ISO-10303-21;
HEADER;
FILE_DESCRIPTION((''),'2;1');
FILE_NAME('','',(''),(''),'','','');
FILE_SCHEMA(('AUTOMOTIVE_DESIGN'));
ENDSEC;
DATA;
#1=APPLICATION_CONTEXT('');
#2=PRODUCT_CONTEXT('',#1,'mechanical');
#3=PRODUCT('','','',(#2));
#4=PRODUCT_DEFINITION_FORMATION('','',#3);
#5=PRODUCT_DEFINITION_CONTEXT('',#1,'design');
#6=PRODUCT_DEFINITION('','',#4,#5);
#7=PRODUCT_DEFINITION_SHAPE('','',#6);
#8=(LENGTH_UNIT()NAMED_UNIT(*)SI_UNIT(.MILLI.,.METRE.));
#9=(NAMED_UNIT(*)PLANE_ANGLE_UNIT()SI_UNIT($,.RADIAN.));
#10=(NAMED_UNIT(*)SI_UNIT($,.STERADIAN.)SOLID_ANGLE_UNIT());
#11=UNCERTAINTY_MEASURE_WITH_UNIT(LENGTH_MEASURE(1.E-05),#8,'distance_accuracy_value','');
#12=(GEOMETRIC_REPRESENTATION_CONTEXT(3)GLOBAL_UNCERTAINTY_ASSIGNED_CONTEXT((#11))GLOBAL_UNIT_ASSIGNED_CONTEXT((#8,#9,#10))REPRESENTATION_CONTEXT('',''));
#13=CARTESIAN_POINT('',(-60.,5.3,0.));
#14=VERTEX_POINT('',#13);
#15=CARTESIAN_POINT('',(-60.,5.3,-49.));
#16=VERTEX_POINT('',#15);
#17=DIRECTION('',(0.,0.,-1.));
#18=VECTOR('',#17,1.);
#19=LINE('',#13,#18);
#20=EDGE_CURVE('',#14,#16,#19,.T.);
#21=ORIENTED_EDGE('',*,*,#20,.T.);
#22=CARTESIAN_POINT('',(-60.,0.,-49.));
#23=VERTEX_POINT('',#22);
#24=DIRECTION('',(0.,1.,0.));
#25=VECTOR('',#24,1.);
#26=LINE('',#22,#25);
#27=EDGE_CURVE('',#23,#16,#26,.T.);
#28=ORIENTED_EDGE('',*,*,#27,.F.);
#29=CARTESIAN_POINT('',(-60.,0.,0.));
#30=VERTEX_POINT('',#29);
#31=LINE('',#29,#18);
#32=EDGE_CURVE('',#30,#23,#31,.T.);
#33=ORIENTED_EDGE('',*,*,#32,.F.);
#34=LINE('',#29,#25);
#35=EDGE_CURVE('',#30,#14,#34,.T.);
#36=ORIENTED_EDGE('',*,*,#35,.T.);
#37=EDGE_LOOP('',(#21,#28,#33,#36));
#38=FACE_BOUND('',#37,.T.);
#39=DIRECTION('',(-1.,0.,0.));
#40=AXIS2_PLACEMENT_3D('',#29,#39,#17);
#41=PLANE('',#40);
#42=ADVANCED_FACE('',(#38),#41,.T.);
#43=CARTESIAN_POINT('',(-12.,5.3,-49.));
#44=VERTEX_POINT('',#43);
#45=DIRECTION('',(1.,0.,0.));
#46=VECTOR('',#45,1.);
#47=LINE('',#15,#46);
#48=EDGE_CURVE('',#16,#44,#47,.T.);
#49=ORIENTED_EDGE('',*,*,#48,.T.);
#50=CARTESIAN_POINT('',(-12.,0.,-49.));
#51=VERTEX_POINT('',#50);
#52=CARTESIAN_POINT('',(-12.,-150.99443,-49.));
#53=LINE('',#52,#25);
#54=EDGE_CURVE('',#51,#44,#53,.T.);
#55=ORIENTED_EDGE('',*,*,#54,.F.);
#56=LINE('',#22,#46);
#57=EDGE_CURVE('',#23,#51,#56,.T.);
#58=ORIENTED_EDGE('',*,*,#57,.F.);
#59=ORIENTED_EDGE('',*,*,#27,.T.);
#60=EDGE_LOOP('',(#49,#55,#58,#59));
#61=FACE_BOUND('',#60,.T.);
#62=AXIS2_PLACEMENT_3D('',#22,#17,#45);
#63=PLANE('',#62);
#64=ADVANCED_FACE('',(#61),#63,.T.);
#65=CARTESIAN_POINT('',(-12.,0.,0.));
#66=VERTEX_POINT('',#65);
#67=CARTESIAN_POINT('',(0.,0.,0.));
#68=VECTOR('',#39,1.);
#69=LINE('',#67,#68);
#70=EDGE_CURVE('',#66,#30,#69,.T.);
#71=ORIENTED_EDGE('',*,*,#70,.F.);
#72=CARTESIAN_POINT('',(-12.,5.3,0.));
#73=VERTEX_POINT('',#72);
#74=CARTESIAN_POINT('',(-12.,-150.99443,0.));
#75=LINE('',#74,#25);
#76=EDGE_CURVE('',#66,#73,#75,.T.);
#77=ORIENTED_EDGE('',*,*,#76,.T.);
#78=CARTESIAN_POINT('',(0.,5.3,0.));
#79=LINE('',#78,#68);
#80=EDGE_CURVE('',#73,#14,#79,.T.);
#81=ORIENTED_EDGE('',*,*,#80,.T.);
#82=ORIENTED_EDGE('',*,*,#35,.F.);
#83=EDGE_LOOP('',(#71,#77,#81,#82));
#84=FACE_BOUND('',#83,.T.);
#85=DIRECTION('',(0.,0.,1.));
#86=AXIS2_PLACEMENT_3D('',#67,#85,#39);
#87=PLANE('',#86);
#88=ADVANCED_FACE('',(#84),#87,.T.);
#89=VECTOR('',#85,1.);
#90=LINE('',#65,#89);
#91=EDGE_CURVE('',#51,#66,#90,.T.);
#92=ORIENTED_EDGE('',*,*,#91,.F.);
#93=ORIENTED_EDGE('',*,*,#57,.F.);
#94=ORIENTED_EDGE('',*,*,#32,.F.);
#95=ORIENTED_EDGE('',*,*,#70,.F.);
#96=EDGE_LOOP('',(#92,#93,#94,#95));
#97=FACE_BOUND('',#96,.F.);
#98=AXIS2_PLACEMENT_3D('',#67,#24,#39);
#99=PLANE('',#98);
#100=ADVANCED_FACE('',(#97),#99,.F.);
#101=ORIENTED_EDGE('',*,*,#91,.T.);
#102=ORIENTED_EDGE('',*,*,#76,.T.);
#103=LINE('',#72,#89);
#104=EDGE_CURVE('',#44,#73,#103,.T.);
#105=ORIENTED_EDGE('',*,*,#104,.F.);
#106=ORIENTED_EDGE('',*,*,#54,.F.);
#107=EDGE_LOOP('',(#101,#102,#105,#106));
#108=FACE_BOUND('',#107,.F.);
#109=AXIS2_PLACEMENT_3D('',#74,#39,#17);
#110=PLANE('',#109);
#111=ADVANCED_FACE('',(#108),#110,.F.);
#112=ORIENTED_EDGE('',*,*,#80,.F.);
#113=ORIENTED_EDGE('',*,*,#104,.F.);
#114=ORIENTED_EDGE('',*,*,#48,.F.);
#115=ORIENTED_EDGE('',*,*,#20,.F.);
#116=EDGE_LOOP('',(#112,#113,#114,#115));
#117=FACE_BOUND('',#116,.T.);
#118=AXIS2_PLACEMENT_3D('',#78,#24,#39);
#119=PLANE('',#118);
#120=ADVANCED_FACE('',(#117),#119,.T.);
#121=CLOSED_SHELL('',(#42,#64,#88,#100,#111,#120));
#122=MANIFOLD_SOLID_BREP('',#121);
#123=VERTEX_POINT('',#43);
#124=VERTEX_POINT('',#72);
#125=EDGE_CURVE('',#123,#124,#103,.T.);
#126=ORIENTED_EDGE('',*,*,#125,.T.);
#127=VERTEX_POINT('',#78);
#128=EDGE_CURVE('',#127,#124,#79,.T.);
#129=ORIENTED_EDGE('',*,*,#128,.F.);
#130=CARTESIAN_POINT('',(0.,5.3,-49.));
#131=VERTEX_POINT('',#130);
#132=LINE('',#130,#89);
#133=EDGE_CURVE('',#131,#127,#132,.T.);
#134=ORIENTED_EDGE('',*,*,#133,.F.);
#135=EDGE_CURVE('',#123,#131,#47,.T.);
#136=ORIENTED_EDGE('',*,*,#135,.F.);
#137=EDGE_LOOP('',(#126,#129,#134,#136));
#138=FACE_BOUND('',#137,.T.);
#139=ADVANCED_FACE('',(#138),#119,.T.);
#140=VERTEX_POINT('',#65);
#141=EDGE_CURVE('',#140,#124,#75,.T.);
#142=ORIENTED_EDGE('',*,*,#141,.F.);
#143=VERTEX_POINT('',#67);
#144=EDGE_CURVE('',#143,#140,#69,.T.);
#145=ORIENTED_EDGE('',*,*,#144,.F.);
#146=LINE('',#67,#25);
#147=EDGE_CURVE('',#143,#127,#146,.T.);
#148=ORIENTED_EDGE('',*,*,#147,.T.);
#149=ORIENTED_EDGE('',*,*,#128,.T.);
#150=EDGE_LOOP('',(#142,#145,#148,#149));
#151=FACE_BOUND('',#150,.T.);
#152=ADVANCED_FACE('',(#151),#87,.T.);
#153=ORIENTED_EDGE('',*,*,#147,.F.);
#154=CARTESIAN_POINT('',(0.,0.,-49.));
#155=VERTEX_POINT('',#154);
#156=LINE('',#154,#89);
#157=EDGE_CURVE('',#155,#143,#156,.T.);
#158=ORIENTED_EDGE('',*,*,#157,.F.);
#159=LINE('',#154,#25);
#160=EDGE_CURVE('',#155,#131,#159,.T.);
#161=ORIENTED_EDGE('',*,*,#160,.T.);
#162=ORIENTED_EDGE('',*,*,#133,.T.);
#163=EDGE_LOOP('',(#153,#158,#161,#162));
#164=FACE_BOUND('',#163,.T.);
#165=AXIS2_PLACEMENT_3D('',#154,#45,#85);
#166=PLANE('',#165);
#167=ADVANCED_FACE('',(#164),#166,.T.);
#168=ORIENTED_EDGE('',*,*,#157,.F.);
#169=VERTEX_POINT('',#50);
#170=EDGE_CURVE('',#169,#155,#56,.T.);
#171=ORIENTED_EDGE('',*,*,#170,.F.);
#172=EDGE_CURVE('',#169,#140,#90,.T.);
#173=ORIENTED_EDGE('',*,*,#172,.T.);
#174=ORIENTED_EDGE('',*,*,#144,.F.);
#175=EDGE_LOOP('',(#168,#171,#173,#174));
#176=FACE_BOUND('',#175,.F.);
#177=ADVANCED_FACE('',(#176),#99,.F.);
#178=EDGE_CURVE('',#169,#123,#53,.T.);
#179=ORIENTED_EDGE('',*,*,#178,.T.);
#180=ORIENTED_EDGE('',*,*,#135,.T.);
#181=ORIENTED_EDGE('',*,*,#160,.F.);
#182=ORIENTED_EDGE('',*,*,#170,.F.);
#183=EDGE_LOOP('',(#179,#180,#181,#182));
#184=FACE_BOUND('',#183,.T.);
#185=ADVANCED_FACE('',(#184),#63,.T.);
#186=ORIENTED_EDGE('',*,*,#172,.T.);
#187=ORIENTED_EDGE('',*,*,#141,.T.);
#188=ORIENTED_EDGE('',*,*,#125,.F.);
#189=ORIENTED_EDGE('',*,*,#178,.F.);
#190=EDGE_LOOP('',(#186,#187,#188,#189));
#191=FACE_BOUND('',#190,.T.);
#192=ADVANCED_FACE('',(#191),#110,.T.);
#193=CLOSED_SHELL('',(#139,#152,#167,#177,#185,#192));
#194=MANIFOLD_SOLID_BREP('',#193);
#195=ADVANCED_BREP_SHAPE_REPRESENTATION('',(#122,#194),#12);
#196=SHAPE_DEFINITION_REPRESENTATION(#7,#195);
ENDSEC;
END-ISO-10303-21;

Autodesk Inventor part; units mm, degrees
ref_plane "YZ Plane" through (0, 0, 0) normal (1, 0, 0) x (0, 1, 0)
ref_plane "XZ Plane" through (0, 0, 0) normal (0, 1, 0) x (-1, 0, 0)
ref_plane "XY Plane" through (0, 0, 0) normal (0, 0, 1) x (1, 0, 0)
sketch "Sketch1" plane through (0, 0, 0) normal (0, 1, 0) x (-1, 0, 0)
  line L0 (0, 0) -> (60, 0)
  line L1 (60, 0) -> (60, -49)
  line L2 (60, -49) -> (0, -49)
  line L3 (0, -49) -> (0, 0)
  dimension "d0" = 60
  dimension "d1" = 49
extrude "Extrusion1" add sketch "Sketch1" along normal blind 5.3
sketch "Sketch2" plane through (0, 5.3, 0) normal (0, 1, 0) x (1, 0, 0)
  line L0 (-60, 0) -> (0, 0) projected
  line L1 (-12, 0) -> (-12, 49)
  line L2 (0, 49) -> (-60, 49) projected
  line L3 (0, 0) -> (0, 49) projected
  dimension "d4" = 12
split body "Split1" sketch "Sketch2" result two bodies curves L1 first body at (-44, 0.5, -32.6667)
sketch "Sketch3" plane through (0, 0, -49) normal (0, 0, -1) x (-1, 0, 0)
  circle A0 centre (1, 4.3) radius 0.75
  circle A1 centre (1, 1) radius 0.75
  line L0 (0, 0) -> (0, 5.3) projected
  line L1 (0, 5.3) -> (12, 5.3) projected
  line L2 (0, 0) -> (12, 0) projected
  dimension "d5" = 1
  dimension "d6" = 1
  dimension "d7" = 1.5
  dimension "d8" = 1.5
  dimension "d9" = 1
  dimension "d10" = 1
properties part number "bateria"
